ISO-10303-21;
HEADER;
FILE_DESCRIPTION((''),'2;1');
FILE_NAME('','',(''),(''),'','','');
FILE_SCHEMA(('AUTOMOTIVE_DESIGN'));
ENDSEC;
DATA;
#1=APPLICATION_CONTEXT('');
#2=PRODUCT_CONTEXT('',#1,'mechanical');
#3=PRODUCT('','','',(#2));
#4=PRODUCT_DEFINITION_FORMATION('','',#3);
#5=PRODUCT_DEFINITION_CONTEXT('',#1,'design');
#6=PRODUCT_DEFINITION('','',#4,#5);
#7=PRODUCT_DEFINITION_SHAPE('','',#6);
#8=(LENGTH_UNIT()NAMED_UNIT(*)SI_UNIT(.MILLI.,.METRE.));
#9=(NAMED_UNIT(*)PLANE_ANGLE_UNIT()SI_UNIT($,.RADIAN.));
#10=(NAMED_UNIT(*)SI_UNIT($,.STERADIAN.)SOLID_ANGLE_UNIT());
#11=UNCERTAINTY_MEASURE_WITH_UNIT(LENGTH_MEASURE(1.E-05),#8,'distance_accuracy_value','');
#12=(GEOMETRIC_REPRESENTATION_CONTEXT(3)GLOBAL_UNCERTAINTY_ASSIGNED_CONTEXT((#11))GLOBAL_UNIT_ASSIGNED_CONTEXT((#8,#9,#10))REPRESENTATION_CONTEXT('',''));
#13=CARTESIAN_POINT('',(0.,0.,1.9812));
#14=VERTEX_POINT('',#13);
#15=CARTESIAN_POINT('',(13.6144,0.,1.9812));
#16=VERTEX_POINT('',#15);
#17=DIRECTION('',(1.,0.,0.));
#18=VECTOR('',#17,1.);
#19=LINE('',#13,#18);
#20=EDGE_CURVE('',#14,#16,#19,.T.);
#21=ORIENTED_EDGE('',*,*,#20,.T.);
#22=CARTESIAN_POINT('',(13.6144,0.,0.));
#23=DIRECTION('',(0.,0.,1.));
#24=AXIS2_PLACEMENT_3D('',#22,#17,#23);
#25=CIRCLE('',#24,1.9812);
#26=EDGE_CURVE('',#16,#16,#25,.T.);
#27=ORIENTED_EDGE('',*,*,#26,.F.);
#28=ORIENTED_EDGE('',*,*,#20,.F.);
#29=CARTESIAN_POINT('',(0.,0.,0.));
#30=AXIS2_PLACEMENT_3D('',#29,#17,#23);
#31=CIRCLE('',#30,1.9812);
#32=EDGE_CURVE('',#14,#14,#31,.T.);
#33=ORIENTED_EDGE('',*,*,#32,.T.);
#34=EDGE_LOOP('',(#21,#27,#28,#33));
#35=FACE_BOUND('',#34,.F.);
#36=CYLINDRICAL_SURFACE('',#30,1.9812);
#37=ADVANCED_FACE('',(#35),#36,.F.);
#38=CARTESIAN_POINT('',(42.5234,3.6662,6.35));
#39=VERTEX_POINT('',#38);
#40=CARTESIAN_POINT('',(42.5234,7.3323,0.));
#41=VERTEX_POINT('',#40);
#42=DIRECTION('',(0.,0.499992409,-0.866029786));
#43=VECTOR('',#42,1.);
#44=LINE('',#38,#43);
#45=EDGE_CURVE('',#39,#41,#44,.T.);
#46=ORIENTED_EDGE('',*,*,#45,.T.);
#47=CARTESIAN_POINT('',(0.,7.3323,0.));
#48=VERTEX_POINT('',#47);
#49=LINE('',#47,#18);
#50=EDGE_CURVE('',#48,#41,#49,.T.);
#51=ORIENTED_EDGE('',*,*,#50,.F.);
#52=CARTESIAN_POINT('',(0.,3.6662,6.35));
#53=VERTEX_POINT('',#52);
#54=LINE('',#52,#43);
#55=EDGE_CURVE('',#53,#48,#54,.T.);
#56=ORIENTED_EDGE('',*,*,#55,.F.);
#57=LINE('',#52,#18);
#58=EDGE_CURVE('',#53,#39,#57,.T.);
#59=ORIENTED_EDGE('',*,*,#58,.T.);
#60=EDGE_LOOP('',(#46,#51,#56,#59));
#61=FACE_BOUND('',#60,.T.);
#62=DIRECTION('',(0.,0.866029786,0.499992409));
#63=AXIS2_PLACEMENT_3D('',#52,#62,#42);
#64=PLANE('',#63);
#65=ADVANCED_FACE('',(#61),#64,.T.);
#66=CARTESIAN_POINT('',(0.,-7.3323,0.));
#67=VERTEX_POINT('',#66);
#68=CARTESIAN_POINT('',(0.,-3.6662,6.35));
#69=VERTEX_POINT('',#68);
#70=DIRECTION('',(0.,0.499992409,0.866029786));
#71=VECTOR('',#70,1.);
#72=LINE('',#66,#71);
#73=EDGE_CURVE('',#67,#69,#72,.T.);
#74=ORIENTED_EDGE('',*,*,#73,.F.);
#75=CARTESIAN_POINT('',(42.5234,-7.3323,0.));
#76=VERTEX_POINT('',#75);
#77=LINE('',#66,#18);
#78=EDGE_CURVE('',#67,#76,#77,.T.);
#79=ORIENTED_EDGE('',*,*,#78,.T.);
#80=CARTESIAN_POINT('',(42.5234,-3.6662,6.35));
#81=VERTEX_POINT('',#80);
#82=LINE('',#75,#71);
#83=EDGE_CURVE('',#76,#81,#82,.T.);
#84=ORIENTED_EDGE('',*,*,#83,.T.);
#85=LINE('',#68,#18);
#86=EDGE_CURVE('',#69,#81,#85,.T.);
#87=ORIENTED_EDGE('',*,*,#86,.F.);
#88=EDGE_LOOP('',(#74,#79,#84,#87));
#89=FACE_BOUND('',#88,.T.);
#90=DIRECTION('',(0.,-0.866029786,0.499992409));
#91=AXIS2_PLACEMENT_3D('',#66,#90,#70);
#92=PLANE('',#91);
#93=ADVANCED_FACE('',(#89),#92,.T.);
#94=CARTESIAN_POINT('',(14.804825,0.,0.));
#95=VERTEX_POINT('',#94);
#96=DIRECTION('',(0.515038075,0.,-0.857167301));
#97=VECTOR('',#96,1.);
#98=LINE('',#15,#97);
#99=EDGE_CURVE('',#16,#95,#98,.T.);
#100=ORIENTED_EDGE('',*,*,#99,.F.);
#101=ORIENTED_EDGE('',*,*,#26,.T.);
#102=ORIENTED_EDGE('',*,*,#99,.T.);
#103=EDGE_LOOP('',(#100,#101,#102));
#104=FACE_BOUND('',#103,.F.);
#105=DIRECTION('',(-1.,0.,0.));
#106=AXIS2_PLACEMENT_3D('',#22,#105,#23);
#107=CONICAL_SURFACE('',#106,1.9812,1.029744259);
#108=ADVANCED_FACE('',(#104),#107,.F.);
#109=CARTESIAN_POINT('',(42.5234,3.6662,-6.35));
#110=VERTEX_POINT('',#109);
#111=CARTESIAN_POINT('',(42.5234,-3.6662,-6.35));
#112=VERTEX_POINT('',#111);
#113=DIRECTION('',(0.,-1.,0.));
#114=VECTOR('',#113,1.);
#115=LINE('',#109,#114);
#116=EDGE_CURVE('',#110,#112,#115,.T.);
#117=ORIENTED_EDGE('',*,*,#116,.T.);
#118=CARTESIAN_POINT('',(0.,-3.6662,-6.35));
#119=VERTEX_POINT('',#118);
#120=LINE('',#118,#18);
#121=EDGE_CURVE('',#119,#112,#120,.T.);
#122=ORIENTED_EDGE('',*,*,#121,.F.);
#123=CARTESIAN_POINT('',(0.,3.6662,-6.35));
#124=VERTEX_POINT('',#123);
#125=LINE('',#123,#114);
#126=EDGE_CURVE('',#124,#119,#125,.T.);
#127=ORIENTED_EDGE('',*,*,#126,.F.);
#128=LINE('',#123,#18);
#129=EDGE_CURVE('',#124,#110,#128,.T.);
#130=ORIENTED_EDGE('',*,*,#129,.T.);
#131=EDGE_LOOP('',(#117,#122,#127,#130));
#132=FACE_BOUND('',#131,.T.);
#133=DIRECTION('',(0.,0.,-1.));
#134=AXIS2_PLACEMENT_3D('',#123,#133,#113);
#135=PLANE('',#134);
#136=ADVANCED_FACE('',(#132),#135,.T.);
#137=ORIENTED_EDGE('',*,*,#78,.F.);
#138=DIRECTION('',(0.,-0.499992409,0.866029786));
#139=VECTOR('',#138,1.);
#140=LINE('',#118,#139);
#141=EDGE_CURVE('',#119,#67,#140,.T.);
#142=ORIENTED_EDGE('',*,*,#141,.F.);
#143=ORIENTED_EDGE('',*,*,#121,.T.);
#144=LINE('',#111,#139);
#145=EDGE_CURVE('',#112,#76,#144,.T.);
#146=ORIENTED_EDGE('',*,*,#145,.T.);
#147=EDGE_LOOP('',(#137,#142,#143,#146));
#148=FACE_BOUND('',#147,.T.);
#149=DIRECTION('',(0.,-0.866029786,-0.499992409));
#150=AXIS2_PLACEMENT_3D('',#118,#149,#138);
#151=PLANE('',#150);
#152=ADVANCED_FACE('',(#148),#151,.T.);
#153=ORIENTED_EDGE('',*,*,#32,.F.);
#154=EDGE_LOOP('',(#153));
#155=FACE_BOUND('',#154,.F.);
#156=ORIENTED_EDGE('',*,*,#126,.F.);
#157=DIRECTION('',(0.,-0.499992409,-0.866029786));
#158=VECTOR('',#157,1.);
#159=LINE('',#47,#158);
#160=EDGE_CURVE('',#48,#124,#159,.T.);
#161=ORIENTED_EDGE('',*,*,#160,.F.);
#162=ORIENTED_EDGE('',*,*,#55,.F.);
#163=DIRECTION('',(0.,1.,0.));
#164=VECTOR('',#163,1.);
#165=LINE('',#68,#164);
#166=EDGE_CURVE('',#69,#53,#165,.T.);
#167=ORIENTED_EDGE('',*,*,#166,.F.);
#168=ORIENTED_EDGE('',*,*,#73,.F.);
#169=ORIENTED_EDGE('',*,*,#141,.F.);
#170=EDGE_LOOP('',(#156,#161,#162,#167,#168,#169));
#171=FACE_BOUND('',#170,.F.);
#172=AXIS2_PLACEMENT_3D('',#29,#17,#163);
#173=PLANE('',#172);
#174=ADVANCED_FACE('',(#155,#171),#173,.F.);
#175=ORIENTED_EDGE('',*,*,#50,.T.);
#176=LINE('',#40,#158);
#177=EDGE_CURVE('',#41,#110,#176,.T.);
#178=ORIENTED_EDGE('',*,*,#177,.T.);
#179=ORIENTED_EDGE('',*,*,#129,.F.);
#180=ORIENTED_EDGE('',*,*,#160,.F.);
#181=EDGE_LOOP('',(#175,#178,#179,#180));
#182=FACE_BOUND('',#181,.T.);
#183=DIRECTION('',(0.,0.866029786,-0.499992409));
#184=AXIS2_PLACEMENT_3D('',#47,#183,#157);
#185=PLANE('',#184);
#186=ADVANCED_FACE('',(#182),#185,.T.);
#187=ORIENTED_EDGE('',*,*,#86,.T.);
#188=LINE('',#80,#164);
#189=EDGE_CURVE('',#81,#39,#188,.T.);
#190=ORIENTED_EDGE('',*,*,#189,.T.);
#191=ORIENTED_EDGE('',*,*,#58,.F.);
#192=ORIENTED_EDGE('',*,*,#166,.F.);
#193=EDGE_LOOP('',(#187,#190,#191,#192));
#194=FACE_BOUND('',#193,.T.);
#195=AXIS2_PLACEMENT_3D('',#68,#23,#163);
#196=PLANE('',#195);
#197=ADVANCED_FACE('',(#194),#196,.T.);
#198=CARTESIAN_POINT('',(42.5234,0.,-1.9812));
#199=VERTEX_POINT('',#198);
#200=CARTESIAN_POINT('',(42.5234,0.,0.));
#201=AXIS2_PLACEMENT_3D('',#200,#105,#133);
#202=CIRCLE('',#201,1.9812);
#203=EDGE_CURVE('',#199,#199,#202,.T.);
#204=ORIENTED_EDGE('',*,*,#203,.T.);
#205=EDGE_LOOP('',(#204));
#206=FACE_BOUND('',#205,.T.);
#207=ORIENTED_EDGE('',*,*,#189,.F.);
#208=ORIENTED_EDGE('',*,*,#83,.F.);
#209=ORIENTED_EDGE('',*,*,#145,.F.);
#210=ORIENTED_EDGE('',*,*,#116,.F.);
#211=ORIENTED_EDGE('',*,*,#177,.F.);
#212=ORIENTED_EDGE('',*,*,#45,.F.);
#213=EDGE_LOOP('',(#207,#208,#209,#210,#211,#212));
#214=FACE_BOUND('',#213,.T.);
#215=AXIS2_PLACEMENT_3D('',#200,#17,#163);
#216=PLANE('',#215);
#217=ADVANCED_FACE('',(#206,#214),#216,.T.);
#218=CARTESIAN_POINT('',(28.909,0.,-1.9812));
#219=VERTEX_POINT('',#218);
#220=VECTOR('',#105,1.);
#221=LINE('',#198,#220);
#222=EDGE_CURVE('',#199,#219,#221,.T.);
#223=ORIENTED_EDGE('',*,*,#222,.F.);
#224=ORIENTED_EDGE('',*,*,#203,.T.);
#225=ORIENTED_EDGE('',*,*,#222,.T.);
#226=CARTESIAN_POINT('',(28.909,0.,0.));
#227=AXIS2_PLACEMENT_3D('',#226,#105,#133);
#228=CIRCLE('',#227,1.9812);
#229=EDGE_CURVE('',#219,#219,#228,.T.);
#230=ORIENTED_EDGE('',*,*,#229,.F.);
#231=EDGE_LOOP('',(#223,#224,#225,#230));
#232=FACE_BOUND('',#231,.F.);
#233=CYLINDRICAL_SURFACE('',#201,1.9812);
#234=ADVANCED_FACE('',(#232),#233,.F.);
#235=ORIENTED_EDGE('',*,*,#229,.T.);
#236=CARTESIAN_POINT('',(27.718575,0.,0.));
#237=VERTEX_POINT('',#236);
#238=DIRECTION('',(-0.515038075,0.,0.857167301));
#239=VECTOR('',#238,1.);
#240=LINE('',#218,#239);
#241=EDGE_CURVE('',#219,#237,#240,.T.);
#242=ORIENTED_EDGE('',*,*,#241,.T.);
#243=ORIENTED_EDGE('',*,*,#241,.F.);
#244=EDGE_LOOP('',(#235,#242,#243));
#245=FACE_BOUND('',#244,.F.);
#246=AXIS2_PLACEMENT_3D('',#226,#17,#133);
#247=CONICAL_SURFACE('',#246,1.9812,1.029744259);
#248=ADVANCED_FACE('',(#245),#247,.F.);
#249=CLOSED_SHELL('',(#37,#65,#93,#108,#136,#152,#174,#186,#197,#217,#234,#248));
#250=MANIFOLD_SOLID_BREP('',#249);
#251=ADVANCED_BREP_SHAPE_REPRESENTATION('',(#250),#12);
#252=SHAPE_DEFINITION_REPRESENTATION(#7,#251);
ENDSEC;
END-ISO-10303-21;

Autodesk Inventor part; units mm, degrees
ref_plane "YZ Plane" through (0, 0, 0) normal (1, 0, 0) x (0, 1, 0)
ref_plane "XZ Plane" through (0, 0, 0) normal (0, 1, 0) x (-1, 0, 0)
ref_plane "XY Plane" through (0, 0, 0) normal (0, 0, 1) x (1, 0, 0)
sketch "Sketch1" plane through (0, 0, 0) normal (1, 0, 0) x (0, 1, 0)
  line L0 (3.6662, -6.35) -> (-3.6662, -6.35)
  line L1 (-3.6662, -6.35) -> (-7.3323, 0)
  line L2 (-7.3323, 0) -> (-3.6662, 6.35)
  line L3 (-3.6662, 6.35) -> (3.6662, 6.35)
  line L4 (3.6662, 6.35) -> (7.3323, 0)
  line L5 (7.3323, 0) -> (3.6662, -6.35)
  point P0 (0, 0)
  point P1 (0, 0)
  dimension "d0" = 12.7
extrude "Extrusion1" add sketch "Sketch1" along normal blind 42.5234
sketch "Sketch2" plane through (42.5234, 0, 0) normal (1, 0, 0) x (0, 0, -1)
  point P0 (0, 0)
  point P1 (0, 0)
hole "Hole1" at (42.5234, 0, 0) direction (-1, 0, 0) diameter 3.9624 depth 13.6144 tip angle 118 thread size "10-32 UNF" class "2B" standard "ANSI Unified Screw Threads"
sketch "Sketch3" plane through (0, 0, 0) normal (-1, 0, 0) x (0, 0, 1)
  point P0 (0, 0)
  point P1 (0, 0)
hole "Hole2" at (0, 0, 0) direction (1, 0, 0) diameter 3.9624 depth 13.6144 tip angle 118 thread size "10-32 UNF" class "2B" standard "ANSI Unified Screw Threads"
properties part number "STOCK,HEX,SHAFT,KICKER,REVERSER"
